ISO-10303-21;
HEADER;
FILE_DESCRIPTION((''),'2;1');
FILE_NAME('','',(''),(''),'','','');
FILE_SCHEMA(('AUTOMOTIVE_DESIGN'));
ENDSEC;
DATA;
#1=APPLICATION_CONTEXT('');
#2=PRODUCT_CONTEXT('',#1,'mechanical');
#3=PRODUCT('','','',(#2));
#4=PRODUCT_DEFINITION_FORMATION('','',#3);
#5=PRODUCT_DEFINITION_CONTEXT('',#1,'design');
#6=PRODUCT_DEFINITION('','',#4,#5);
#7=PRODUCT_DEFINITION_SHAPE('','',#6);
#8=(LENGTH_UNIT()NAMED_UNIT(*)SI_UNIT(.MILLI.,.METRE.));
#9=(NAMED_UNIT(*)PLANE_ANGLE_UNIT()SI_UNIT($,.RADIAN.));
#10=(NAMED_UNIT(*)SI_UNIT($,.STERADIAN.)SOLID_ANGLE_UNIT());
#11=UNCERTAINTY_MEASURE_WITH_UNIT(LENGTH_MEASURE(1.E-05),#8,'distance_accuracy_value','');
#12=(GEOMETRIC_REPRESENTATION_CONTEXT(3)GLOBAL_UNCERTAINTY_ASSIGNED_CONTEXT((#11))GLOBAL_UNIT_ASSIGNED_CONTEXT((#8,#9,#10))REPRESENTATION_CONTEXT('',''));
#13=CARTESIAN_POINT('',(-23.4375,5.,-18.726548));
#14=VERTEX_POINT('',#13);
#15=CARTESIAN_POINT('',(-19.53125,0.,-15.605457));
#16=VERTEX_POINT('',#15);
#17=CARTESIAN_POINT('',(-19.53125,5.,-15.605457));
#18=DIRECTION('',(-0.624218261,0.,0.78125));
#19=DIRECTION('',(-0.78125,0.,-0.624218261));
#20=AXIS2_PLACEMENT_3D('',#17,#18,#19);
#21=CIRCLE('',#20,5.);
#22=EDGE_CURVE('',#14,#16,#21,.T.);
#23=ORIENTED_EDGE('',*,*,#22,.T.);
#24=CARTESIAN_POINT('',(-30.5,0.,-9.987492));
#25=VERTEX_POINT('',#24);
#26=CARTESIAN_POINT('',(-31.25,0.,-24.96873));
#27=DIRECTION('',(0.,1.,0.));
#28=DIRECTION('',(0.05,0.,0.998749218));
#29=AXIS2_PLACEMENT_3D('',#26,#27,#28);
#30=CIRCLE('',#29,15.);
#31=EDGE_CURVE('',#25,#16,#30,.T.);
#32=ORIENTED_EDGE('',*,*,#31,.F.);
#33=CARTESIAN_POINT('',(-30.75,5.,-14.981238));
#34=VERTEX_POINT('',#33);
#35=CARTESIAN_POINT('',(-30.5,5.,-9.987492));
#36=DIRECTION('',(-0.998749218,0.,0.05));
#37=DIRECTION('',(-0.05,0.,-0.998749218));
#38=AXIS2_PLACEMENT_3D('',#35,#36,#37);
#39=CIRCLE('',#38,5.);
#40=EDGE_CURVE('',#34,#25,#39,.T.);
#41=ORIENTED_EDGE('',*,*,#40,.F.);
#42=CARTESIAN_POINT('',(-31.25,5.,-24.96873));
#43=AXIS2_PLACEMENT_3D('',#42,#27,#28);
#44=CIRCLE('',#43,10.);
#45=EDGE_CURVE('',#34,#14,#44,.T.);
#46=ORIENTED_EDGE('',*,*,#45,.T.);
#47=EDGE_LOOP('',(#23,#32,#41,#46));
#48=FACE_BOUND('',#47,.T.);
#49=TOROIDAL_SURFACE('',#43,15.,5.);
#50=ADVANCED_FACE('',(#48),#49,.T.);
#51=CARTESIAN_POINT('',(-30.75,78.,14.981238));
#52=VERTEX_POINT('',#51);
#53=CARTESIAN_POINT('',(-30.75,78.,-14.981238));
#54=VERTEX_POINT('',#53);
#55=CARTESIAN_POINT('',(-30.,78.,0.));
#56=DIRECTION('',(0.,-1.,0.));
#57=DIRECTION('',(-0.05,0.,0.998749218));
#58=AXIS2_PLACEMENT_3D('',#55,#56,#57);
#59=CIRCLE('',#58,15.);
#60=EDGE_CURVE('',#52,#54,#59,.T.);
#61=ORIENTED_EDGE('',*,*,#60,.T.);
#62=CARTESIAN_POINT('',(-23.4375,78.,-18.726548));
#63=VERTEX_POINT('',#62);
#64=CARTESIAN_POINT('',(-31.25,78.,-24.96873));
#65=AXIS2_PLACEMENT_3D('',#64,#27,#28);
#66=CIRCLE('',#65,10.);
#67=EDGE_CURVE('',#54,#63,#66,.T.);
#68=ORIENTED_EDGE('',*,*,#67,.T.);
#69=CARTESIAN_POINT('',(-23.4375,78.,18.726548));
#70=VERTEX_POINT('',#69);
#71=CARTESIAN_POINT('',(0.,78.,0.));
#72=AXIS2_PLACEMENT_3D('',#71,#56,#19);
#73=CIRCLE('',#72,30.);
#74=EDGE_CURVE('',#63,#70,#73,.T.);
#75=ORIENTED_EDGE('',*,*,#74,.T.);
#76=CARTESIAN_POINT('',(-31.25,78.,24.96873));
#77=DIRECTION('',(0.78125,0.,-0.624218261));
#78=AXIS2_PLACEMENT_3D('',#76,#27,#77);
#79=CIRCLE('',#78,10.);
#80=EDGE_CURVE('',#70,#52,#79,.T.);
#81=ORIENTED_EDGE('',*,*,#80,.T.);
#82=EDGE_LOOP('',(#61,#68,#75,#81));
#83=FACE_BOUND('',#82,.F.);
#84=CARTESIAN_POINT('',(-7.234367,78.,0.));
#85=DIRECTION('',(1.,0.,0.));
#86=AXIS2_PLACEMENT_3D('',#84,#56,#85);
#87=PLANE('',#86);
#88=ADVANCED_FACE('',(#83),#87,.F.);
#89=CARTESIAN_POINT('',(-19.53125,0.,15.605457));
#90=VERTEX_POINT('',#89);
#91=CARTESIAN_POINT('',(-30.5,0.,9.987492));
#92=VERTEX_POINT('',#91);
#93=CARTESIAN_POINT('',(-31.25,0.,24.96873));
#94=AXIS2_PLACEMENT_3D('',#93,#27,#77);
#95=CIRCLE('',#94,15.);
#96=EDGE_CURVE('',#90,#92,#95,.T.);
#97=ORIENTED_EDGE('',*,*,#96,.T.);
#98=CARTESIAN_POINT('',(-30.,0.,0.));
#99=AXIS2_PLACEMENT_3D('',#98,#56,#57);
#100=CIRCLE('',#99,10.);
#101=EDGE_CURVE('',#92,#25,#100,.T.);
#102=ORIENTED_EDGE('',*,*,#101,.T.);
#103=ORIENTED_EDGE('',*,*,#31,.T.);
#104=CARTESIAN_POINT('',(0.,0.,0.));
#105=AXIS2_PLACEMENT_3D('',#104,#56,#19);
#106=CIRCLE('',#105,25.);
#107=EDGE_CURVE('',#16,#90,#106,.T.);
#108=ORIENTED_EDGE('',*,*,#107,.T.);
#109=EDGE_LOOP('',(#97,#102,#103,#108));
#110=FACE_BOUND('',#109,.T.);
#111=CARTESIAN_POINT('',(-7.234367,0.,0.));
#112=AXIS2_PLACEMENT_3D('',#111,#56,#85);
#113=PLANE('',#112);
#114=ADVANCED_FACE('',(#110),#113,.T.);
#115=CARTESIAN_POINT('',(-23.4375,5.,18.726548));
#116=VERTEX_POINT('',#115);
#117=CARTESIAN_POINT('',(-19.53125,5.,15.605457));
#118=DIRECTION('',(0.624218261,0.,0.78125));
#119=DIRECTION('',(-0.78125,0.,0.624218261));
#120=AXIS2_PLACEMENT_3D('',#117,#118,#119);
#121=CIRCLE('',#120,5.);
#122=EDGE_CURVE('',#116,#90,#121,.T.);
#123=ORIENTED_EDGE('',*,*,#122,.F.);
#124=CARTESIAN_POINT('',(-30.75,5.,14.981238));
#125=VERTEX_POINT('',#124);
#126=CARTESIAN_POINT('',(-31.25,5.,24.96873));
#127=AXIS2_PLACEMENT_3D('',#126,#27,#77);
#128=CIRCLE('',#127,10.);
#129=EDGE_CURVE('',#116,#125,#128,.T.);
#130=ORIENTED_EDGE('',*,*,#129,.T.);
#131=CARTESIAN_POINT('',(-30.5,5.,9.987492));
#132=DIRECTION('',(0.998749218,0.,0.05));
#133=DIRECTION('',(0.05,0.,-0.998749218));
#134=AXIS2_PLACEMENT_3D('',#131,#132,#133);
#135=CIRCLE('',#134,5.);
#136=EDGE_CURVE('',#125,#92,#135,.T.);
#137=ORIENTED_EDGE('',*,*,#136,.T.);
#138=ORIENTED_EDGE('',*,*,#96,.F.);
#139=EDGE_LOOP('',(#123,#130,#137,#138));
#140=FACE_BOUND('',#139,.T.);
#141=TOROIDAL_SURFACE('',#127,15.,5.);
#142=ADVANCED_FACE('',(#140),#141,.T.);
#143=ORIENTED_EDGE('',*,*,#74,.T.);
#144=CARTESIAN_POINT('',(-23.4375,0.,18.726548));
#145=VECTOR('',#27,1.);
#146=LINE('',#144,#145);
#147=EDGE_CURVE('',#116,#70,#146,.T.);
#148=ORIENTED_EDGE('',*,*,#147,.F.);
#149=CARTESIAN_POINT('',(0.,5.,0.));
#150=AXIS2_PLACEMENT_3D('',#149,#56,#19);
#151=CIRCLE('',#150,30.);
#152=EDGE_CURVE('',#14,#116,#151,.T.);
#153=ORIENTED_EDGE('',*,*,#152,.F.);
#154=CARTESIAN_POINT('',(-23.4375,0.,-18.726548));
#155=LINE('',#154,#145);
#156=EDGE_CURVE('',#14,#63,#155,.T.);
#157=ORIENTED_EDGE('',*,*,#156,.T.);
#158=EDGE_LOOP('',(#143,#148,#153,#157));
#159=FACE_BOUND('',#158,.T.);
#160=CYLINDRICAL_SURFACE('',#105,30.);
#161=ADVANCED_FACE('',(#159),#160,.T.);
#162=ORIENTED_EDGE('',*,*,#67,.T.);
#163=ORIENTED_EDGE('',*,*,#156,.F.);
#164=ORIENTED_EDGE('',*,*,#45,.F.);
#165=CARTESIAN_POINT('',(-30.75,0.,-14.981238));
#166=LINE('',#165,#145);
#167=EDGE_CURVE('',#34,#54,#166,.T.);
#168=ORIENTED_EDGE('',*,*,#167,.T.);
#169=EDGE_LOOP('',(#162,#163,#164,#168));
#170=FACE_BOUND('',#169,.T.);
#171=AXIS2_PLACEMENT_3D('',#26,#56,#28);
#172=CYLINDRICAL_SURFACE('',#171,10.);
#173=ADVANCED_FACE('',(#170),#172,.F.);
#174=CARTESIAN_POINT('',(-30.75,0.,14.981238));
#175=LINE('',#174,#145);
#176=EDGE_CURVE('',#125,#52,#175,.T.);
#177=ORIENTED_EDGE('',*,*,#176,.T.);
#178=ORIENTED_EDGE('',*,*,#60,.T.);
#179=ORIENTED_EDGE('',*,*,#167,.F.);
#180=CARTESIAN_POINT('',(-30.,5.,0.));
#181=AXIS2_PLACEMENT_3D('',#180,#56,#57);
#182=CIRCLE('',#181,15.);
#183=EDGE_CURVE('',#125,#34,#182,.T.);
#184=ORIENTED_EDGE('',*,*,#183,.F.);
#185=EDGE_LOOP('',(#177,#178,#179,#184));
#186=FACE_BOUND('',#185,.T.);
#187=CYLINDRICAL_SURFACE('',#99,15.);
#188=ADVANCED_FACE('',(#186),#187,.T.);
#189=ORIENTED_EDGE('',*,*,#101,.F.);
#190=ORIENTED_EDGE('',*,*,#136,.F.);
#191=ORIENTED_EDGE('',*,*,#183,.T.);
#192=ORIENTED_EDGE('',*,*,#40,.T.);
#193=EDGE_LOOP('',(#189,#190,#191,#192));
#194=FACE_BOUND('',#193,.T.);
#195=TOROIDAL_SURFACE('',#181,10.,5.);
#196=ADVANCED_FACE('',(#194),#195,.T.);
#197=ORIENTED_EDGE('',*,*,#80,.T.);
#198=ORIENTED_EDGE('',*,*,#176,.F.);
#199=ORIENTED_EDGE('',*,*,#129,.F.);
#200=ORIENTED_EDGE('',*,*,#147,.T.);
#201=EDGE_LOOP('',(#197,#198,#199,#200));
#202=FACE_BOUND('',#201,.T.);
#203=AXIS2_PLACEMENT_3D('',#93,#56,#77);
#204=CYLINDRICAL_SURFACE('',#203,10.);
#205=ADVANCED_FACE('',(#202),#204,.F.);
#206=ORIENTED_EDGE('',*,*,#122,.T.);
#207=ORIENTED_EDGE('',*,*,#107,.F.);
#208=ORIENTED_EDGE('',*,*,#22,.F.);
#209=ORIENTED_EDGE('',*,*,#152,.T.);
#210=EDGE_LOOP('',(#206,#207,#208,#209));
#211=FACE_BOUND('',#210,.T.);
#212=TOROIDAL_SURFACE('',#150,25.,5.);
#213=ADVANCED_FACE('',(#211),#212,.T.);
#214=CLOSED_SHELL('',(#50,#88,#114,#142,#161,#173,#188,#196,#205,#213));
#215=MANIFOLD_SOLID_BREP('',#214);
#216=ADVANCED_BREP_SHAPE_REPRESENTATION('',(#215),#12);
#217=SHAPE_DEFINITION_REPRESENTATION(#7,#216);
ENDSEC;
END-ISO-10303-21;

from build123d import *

# Parameters (mm, degrees)
F1_DEPTH = 78
F2_R     = 5


# Not quite as in the source:
# - a feature of the source that left no trace in its solid (it failed there, or was rolled back) is left out


with BuildPart() as f1:
    # F0 (on Front) → F1 (new body)
    with BuildSketch(Plane.XZ):
        with BuildLine():
            ThreePointArc((-30.75, -14.9812382666), (-26.6913543678, -16.0682388848), (-23.4375, -18.7265478332))
            ThreePointArc((-23.4375, -18.7265478332), (30, 0), (-23.4375, 18.7265478332))
            ThreePointArc((-23.4375, 18.7265478332), (-26.6913543678, 16.0682388848), (-30.75, 14.9812382666))
            ThreePointArc((-30.75, 14.9812382666), (-45, 0), (-30.75, -14.9812382666))
        make_face()
    extrude(amount=-F1_DEPTH)

    # F2
    f2_edges = [f1.edges().sort_by_distance(p)[0] for p in [
        (30, 0, 0),
        (-26.691354, 0, 16.068239),
        (-45, 0, 0),
        (-26.691354, 0, -16.068239),
    ]]
    fillet(f2_edges, radius=F2_R)


solid = f1.part
